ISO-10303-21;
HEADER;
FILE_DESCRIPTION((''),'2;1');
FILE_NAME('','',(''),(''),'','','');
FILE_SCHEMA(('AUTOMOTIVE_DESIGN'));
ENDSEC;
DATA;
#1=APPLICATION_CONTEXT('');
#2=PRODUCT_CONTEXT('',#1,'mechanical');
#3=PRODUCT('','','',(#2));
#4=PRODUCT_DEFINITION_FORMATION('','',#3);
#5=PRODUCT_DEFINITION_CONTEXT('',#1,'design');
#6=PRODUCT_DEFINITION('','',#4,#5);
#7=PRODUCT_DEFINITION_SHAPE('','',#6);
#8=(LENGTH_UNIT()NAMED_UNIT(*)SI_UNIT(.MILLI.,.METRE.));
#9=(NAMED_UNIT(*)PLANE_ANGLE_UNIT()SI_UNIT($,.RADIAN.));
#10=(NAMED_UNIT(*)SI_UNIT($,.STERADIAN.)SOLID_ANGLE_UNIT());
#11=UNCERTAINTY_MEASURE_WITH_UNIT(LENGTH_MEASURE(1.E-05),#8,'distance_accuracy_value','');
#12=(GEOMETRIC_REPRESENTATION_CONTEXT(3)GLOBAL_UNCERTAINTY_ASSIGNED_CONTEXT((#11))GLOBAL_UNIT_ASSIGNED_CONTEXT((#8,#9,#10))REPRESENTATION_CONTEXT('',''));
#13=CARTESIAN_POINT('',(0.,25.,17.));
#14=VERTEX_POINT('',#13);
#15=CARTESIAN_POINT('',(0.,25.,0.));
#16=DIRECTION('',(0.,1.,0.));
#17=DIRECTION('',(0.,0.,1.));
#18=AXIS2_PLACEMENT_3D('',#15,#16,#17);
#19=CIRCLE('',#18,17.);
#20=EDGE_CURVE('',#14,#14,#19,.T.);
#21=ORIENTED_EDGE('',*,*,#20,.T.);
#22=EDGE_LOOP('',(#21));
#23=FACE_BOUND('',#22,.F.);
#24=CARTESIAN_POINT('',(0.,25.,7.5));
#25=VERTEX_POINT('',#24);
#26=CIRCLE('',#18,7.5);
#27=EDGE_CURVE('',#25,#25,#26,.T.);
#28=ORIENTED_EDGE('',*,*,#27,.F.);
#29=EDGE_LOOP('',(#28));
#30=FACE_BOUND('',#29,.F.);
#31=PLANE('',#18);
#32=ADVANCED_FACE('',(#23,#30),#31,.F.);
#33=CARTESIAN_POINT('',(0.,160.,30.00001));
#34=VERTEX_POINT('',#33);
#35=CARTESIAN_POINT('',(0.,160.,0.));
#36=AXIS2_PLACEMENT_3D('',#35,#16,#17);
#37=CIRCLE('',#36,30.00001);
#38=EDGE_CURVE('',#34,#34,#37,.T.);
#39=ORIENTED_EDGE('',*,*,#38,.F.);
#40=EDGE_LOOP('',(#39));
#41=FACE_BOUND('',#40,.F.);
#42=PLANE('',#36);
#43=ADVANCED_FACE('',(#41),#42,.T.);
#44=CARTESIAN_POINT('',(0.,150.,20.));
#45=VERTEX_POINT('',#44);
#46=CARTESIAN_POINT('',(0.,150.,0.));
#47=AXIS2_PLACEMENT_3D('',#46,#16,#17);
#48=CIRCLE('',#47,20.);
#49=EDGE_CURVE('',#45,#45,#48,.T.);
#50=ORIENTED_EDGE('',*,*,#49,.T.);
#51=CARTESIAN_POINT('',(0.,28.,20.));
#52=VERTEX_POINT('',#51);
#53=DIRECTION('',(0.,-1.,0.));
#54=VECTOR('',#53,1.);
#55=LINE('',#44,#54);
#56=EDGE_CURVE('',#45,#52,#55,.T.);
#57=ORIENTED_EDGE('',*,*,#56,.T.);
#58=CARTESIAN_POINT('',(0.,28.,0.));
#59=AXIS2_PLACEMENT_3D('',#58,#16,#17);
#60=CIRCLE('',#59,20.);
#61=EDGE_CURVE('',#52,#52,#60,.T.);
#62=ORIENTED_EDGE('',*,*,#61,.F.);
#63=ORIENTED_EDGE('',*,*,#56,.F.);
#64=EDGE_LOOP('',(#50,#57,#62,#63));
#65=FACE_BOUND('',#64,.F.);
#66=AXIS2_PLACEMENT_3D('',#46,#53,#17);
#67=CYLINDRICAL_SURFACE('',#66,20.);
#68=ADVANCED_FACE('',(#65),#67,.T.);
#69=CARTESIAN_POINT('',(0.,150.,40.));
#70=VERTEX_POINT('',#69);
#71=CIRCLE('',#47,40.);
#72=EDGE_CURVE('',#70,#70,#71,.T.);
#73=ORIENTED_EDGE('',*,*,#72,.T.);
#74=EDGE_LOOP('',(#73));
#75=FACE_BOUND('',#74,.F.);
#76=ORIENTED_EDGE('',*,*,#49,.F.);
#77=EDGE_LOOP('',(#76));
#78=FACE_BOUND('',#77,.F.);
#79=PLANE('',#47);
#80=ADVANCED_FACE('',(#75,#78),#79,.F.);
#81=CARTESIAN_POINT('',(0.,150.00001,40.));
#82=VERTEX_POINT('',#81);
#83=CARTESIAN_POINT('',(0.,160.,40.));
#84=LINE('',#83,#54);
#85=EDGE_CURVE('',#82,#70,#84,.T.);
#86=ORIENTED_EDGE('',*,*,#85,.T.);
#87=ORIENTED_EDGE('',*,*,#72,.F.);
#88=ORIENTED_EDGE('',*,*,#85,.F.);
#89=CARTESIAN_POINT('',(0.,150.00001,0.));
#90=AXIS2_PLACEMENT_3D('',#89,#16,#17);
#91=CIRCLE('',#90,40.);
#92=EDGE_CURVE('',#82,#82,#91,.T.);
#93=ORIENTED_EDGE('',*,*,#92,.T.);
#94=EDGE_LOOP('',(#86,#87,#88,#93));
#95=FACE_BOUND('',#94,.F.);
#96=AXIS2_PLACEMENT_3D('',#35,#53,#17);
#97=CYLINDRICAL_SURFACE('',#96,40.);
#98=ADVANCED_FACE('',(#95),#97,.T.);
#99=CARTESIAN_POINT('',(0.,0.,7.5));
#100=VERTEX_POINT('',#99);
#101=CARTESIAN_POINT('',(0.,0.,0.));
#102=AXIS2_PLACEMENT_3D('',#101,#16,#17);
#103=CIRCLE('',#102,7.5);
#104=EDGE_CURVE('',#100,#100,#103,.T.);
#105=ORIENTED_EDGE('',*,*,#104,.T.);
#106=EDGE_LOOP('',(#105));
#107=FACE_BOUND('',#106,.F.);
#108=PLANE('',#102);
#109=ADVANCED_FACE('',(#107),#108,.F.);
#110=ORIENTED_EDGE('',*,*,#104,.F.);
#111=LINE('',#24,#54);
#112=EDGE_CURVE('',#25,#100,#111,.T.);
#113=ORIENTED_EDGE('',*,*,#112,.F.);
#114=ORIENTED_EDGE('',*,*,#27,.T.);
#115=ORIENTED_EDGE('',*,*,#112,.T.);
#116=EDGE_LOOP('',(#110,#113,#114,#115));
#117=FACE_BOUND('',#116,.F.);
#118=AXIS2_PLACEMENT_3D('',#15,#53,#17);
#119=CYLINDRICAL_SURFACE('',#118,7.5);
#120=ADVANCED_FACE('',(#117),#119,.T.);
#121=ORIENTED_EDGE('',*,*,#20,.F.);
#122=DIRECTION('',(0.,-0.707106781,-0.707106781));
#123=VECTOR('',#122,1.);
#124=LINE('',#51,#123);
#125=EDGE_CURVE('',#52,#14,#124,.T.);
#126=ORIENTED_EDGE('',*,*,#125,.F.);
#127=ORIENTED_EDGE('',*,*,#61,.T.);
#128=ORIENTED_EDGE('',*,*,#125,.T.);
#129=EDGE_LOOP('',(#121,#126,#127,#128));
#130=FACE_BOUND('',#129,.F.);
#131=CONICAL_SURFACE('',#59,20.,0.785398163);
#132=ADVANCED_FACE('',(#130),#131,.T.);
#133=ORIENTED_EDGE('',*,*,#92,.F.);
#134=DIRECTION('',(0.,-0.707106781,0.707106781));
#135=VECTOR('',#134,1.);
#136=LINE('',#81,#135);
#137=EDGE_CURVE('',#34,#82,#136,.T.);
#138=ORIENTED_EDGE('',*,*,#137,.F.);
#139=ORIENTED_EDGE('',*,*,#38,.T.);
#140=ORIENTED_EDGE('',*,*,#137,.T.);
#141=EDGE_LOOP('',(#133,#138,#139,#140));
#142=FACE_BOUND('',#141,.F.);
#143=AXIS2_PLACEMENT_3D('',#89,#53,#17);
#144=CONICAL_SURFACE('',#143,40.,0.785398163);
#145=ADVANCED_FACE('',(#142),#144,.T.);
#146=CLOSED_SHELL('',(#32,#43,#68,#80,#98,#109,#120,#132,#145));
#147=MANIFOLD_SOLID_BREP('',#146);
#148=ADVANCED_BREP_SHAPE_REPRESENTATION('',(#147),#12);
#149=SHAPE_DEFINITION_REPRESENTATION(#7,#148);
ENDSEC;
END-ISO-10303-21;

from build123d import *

# Parameters (mm, degrees)
F2_SIZE2 = 9.99999
F2_SIZE  = 9.99999
F3_SIZE2 = 3
F3_SIZE  = 3


# Not quite as in the source:
# - a fillet or chamfer is up to 0.001 mm smaller than in the source, because OpenCascade refuses the exact size


with BuildPart() as f1:
    # F0 (on Right) → F1 (revolve)
    with BuildSketch(Plane.YZ):
        Polygon((0, 0), (160, 0), (160, 40), (150, 40), (150, 20), (25, 20), (25, 7.5), (0, 7.5), align=None)
    revolve(axis=Axis((0, 80, 0), (0, 1, 0)))

    # F2 (size 10 and 10 in the source; OpenCascade refuses exactly that, so slightly less here)
    f2_edges = [f1.edges().sort_by_distance(p)[0] for p in [
        (0, 160, -40),
    ]]
    chamfer(f2_edges, length=F2_SIZE, length2=F2_SIZE2)

    # F3
    f3_edges = [f1.edges().sort_by_distance(p)[0] for p in [
        (0, 25, -20),
    ]]
    chamfer(f3_edges, length=F3_SIZE, length2=F3_SIZE2)


solid = f1.part
